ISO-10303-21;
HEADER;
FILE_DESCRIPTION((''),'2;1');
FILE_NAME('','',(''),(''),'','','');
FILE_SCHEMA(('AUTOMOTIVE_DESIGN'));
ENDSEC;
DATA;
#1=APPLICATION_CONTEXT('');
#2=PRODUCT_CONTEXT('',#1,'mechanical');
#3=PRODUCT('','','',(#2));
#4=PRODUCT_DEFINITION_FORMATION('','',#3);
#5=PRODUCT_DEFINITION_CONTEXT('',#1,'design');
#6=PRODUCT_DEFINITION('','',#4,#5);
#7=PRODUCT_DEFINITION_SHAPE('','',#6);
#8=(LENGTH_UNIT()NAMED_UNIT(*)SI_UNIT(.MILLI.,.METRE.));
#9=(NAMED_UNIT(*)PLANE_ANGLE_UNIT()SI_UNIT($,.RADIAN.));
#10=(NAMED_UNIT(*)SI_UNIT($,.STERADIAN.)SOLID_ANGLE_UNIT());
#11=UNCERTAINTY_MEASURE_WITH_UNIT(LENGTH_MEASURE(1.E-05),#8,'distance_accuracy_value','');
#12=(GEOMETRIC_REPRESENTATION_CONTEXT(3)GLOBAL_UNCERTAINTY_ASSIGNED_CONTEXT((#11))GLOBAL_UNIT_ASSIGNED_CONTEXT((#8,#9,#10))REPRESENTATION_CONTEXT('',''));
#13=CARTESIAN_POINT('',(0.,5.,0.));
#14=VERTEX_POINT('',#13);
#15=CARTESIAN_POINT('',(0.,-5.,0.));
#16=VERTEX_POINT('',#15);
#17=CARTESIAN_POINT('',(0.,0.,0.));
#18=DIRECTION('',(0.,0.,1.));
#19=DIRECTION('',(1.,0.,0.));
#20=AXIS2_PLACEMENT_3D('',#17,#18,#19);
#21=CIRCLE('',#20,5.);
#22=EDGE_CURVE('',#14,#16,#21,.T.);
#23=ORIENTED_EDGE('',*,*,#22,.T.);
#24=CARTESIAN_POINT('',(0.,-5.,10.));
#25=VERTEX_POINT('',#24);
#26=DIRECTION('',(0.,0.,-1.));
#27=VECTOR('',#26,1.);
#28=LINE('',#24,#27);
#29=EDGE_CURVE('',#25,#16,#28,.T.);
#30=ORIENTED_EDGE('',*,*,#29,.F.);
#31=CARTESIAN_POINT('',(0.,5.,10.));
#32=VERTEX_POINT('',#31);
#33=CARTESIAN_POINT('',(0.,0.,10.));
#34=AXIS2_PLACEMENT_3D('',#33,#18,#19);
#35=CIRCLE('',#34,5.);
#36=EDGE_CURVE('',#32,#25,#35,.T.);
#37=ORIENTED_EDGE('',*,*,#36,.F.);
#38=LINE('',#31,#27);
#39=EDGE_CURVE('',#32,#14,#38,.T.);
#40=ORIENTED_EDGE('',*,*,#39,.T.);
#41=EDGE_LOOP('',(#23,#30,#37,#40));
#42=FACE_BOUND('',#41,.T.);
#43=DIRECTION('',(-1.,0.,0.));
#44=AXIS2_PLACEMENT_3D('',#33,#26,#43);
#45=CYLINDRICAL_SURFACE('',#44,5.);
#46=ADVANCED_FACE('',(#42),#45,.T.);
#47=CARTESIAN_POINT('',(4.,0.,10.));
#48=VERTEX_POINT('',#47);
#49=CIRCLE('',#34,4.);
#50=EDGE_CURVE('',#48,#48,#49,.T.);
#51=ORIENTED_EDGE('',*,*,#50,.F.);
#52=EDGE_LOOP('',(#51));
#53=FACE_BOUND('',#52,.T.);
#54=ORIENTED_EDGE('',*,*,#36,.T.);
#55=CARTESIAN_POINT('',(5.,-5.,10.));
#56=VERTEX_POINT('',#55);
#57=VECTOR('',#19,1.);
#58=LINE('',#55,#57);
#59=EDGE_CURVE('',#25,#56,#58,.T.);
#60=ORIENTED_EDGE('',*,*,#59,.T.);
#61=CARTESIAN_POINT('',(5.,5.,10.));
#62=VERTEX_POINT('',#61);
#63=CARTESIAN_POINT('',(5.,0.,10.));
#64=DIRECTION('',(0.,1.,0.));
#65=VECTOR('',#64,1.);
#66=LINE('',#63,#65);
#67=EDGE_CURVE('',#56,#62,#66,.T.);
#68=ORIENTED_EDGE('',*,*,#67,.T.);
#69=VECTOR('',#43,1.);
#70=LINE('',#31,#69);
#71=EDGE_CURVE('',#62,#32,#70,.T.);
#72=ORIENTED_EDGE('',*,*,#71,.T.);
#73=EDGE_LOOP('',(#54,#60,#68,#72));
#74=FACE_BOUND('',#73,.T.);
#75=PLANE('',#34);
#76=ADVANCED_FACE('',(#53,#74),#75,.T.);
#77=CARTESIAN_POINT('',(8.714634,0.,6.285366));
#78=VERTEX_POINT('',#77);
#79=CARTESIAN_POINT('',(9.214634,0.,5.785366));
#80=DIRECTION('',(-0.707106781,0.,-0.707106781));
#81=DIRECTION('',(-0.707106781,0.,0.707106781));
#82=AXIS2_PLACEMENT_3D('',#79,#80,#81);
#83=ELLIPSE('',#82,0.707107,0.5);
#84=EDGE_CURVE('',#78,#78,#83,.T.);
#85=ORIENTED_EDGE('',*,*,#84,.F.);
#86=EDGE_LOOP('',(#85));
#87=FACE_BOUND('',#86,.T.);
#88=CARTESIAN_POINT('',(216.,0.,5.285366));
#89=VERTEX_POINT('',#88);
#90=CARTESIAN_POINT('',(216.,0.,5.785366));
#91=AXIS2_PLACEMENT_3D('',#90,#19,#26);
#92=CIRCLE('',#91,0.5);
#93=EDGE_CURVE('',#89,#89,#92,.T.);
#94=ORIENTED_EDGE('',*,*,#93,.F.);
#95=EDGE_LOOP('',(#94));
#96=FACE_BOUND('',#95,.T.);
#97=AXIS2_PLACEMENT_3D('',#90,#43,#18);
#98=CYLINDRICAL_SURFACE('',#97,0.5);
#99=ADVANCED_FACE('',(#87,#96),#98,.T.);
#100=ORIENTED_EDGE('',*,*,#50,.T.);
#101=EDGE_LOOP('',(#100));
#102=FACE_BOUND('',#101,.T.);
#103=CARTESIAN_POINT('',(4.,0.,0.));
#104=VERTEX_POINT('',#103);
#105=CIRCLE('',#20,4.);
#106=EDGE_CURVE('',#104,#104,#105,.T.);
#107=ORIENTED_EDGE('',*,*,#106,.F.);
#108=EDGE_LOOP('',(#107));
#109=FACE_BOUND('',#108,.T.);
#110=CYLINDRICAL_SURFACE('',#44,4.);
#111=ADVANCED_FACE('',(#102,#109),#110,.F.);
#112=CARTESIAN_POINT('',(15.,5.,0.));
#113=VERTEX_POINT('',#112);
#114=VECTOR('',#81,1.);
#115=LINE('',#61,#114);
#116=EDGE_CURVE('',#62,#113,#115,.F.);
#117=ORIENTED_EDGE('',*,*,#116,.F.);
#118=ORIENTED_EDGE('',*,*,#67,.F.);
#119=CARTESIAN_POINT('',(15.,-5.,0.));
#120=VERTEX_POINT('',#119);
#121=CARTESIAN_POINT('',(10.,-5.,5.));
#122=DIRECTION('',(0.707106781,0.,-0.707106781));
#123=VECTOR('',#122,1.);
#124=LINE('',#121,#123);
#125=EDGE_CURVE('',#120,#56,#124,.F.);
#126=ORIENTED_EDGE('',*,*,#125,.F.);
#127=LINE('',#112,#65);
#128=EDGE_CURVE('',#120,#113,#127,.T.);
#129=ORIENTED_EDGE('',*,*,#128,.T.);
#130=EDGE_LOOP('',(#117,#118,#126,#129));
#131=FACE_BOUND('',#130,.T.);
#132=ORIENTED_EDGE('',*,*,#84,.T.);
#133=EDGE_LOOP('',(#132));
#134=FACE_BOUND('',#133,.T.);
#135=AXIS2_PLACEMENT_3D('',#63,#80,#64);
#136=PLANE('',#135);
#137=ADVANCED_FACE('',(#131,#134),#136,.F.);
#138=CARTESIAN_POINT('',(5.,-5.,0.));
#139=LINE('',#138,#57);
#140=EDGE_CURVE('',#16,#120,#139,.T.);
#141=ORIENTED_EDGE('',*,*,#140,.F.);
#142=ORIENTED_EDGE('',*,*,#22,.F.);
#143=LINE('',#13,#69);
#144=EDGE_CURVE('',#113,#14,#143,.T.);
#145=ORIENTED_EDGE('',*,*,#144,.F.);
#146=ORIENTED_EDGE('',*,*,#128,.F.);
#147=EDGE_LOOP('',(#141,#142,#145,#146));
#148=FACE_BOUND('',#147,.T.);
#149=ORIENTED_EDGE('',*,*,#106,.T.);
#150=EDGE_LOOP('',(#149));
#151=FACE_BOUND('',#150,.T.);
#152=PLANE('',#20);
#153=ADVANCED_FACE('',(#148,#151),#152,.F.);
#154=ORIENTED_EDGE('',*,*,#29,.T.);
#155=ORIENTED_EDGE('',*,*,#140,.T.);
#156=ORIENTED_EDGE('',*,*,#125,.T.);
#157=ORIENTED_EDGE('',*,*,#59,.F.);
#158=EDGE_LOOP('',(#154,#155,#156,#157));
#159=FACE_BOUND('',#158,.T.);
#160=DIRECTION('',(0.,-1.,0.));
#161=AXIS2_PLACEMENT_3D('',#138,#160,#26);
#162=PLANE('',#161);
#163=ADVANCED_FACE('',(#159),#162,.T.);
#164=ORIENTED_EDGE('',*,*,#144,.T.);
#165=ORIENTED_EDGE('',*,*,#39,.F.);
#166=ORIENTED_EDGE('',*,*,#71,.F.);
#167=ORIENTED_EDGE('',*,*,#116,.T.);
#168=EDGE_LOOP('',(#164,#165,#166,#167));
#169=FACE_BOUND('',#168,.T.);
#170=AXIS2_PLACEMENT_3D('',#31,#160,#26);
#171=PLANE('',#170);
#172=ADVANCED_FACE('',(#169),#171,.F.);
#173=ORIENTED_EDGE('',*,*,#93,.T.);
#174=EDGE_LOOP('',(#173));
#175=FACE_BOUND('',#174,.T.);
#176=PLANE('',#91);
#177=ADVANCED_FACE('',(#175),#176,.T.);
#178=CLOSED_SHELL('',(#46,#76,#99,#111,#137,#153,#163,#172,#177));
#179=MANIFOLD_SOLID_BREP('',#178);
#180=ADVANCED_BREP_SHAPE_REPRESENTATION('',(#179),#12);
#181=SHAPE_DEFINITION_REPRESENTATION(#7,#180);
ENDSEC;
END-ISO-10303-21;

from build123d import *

# Parameters (mm, degrees)
SZKIC1_R                    = 5
SZKIC1_R_2                  = 4
DODANIE_WYCI_GNI_CIE1_DEPTH = 10
SZKIC2_W                    = 10
SZKIC2_H                    = 10
DODANIE_WYCI_GNI_CIE2_DEPTH = 10
DODANIE_WYCI_GNI_CIE3_DEPTH = 10
DODANIE_WYCI_GNI_CIE4_DEPTH = 10
SFAZOWANIE1_SIZE            = 10
DODANIE_WYCI_GNI_CIE6_START = 6
SZKIC6_R                    = 0.5
DODANIE_WYCI_GNI_CIE6_DEPTH = 210


with BuildPart() as part:
    # Szkic1 → Dodanie-wyciągnięcie1 (new body)
    with BuildSketch(Plane.XY):
        Circle(SZKIC1_R)
        Circle(SZKIC1_R_2, mode=Mode.SUBTRACT)
    extrude(amount=DODANIE_WYCI_GNI_CIE1_DEPTH)



with BuildPart() as body_2:
    # Szkic2 → Dodanie-wyciągnięcie2 (new body)
    with BuildSketch(Plane.XY.offset(10)):
        with Locations((10, 0)):
            Rectangle(SZKIC2_W, SZKIC2_H)
    extrude(amount=-DODANIE_WYCI_GNI_CIE2_DEPTH)


with BuildPart() as part_1:
    add(part.part)

    add(body_2.part)  # Dodanie-wyciągnięcie3 merges body 2
    # Szkic3 → Dodanie-wyciągnięcie3 (add)
    with BuildSketch(Plane.XY):
        Polygon((0, 5), (5, 5), (5, 0), (3.357304053, 3.705200331), align=None)
    extrude(amount=DODANIE_WYCI_GNI_CIE3_DEPTH)

    # Szkic5 → Dodanie-wyciągnięcie4 (add)
    with BuildSketch(Plane(origin=(0, 0, 0), x_dir=(-1, 0, 0), z_dir=(0, 0, -1))):
        Polygon((-5, -5), (-5, 0), (-3.105231781, -3.918869172), (0, -5), align=None)
    extrude(amount=-DODANIE_WYCI_GNI_CIE4_DEPTH)

    # Sfazowanie1
    sfazowanie1_edges = [part_1.edges().sort_by_distance(p)[0] for p in [
        (15, 0, 10),
    ]]
    chamfer(sfazowanie1_edges, length=SFAZOWANIE1_SIZE - 0.0001)  # a hair under: the kernel refuses the full size

    # Szkic6 → Dodanie-wyciągnięcie6 (add)
    with BuildSketch(Plane(origin=(0, 0, 0), x_dir=(0, 0, -1), z_dir=(1, 0, 0)).offset(DODANIE_WYCI_GNI_CIE6_START)):
        with Locations(Location((-5.785366317, 0, 0), (0, 0, 180))):
            Circle(SZKIC6_R)
    extrude(amount=DODANIE_WYCI_GNI_CIE6_DEPTH)


solid = part_1.part
